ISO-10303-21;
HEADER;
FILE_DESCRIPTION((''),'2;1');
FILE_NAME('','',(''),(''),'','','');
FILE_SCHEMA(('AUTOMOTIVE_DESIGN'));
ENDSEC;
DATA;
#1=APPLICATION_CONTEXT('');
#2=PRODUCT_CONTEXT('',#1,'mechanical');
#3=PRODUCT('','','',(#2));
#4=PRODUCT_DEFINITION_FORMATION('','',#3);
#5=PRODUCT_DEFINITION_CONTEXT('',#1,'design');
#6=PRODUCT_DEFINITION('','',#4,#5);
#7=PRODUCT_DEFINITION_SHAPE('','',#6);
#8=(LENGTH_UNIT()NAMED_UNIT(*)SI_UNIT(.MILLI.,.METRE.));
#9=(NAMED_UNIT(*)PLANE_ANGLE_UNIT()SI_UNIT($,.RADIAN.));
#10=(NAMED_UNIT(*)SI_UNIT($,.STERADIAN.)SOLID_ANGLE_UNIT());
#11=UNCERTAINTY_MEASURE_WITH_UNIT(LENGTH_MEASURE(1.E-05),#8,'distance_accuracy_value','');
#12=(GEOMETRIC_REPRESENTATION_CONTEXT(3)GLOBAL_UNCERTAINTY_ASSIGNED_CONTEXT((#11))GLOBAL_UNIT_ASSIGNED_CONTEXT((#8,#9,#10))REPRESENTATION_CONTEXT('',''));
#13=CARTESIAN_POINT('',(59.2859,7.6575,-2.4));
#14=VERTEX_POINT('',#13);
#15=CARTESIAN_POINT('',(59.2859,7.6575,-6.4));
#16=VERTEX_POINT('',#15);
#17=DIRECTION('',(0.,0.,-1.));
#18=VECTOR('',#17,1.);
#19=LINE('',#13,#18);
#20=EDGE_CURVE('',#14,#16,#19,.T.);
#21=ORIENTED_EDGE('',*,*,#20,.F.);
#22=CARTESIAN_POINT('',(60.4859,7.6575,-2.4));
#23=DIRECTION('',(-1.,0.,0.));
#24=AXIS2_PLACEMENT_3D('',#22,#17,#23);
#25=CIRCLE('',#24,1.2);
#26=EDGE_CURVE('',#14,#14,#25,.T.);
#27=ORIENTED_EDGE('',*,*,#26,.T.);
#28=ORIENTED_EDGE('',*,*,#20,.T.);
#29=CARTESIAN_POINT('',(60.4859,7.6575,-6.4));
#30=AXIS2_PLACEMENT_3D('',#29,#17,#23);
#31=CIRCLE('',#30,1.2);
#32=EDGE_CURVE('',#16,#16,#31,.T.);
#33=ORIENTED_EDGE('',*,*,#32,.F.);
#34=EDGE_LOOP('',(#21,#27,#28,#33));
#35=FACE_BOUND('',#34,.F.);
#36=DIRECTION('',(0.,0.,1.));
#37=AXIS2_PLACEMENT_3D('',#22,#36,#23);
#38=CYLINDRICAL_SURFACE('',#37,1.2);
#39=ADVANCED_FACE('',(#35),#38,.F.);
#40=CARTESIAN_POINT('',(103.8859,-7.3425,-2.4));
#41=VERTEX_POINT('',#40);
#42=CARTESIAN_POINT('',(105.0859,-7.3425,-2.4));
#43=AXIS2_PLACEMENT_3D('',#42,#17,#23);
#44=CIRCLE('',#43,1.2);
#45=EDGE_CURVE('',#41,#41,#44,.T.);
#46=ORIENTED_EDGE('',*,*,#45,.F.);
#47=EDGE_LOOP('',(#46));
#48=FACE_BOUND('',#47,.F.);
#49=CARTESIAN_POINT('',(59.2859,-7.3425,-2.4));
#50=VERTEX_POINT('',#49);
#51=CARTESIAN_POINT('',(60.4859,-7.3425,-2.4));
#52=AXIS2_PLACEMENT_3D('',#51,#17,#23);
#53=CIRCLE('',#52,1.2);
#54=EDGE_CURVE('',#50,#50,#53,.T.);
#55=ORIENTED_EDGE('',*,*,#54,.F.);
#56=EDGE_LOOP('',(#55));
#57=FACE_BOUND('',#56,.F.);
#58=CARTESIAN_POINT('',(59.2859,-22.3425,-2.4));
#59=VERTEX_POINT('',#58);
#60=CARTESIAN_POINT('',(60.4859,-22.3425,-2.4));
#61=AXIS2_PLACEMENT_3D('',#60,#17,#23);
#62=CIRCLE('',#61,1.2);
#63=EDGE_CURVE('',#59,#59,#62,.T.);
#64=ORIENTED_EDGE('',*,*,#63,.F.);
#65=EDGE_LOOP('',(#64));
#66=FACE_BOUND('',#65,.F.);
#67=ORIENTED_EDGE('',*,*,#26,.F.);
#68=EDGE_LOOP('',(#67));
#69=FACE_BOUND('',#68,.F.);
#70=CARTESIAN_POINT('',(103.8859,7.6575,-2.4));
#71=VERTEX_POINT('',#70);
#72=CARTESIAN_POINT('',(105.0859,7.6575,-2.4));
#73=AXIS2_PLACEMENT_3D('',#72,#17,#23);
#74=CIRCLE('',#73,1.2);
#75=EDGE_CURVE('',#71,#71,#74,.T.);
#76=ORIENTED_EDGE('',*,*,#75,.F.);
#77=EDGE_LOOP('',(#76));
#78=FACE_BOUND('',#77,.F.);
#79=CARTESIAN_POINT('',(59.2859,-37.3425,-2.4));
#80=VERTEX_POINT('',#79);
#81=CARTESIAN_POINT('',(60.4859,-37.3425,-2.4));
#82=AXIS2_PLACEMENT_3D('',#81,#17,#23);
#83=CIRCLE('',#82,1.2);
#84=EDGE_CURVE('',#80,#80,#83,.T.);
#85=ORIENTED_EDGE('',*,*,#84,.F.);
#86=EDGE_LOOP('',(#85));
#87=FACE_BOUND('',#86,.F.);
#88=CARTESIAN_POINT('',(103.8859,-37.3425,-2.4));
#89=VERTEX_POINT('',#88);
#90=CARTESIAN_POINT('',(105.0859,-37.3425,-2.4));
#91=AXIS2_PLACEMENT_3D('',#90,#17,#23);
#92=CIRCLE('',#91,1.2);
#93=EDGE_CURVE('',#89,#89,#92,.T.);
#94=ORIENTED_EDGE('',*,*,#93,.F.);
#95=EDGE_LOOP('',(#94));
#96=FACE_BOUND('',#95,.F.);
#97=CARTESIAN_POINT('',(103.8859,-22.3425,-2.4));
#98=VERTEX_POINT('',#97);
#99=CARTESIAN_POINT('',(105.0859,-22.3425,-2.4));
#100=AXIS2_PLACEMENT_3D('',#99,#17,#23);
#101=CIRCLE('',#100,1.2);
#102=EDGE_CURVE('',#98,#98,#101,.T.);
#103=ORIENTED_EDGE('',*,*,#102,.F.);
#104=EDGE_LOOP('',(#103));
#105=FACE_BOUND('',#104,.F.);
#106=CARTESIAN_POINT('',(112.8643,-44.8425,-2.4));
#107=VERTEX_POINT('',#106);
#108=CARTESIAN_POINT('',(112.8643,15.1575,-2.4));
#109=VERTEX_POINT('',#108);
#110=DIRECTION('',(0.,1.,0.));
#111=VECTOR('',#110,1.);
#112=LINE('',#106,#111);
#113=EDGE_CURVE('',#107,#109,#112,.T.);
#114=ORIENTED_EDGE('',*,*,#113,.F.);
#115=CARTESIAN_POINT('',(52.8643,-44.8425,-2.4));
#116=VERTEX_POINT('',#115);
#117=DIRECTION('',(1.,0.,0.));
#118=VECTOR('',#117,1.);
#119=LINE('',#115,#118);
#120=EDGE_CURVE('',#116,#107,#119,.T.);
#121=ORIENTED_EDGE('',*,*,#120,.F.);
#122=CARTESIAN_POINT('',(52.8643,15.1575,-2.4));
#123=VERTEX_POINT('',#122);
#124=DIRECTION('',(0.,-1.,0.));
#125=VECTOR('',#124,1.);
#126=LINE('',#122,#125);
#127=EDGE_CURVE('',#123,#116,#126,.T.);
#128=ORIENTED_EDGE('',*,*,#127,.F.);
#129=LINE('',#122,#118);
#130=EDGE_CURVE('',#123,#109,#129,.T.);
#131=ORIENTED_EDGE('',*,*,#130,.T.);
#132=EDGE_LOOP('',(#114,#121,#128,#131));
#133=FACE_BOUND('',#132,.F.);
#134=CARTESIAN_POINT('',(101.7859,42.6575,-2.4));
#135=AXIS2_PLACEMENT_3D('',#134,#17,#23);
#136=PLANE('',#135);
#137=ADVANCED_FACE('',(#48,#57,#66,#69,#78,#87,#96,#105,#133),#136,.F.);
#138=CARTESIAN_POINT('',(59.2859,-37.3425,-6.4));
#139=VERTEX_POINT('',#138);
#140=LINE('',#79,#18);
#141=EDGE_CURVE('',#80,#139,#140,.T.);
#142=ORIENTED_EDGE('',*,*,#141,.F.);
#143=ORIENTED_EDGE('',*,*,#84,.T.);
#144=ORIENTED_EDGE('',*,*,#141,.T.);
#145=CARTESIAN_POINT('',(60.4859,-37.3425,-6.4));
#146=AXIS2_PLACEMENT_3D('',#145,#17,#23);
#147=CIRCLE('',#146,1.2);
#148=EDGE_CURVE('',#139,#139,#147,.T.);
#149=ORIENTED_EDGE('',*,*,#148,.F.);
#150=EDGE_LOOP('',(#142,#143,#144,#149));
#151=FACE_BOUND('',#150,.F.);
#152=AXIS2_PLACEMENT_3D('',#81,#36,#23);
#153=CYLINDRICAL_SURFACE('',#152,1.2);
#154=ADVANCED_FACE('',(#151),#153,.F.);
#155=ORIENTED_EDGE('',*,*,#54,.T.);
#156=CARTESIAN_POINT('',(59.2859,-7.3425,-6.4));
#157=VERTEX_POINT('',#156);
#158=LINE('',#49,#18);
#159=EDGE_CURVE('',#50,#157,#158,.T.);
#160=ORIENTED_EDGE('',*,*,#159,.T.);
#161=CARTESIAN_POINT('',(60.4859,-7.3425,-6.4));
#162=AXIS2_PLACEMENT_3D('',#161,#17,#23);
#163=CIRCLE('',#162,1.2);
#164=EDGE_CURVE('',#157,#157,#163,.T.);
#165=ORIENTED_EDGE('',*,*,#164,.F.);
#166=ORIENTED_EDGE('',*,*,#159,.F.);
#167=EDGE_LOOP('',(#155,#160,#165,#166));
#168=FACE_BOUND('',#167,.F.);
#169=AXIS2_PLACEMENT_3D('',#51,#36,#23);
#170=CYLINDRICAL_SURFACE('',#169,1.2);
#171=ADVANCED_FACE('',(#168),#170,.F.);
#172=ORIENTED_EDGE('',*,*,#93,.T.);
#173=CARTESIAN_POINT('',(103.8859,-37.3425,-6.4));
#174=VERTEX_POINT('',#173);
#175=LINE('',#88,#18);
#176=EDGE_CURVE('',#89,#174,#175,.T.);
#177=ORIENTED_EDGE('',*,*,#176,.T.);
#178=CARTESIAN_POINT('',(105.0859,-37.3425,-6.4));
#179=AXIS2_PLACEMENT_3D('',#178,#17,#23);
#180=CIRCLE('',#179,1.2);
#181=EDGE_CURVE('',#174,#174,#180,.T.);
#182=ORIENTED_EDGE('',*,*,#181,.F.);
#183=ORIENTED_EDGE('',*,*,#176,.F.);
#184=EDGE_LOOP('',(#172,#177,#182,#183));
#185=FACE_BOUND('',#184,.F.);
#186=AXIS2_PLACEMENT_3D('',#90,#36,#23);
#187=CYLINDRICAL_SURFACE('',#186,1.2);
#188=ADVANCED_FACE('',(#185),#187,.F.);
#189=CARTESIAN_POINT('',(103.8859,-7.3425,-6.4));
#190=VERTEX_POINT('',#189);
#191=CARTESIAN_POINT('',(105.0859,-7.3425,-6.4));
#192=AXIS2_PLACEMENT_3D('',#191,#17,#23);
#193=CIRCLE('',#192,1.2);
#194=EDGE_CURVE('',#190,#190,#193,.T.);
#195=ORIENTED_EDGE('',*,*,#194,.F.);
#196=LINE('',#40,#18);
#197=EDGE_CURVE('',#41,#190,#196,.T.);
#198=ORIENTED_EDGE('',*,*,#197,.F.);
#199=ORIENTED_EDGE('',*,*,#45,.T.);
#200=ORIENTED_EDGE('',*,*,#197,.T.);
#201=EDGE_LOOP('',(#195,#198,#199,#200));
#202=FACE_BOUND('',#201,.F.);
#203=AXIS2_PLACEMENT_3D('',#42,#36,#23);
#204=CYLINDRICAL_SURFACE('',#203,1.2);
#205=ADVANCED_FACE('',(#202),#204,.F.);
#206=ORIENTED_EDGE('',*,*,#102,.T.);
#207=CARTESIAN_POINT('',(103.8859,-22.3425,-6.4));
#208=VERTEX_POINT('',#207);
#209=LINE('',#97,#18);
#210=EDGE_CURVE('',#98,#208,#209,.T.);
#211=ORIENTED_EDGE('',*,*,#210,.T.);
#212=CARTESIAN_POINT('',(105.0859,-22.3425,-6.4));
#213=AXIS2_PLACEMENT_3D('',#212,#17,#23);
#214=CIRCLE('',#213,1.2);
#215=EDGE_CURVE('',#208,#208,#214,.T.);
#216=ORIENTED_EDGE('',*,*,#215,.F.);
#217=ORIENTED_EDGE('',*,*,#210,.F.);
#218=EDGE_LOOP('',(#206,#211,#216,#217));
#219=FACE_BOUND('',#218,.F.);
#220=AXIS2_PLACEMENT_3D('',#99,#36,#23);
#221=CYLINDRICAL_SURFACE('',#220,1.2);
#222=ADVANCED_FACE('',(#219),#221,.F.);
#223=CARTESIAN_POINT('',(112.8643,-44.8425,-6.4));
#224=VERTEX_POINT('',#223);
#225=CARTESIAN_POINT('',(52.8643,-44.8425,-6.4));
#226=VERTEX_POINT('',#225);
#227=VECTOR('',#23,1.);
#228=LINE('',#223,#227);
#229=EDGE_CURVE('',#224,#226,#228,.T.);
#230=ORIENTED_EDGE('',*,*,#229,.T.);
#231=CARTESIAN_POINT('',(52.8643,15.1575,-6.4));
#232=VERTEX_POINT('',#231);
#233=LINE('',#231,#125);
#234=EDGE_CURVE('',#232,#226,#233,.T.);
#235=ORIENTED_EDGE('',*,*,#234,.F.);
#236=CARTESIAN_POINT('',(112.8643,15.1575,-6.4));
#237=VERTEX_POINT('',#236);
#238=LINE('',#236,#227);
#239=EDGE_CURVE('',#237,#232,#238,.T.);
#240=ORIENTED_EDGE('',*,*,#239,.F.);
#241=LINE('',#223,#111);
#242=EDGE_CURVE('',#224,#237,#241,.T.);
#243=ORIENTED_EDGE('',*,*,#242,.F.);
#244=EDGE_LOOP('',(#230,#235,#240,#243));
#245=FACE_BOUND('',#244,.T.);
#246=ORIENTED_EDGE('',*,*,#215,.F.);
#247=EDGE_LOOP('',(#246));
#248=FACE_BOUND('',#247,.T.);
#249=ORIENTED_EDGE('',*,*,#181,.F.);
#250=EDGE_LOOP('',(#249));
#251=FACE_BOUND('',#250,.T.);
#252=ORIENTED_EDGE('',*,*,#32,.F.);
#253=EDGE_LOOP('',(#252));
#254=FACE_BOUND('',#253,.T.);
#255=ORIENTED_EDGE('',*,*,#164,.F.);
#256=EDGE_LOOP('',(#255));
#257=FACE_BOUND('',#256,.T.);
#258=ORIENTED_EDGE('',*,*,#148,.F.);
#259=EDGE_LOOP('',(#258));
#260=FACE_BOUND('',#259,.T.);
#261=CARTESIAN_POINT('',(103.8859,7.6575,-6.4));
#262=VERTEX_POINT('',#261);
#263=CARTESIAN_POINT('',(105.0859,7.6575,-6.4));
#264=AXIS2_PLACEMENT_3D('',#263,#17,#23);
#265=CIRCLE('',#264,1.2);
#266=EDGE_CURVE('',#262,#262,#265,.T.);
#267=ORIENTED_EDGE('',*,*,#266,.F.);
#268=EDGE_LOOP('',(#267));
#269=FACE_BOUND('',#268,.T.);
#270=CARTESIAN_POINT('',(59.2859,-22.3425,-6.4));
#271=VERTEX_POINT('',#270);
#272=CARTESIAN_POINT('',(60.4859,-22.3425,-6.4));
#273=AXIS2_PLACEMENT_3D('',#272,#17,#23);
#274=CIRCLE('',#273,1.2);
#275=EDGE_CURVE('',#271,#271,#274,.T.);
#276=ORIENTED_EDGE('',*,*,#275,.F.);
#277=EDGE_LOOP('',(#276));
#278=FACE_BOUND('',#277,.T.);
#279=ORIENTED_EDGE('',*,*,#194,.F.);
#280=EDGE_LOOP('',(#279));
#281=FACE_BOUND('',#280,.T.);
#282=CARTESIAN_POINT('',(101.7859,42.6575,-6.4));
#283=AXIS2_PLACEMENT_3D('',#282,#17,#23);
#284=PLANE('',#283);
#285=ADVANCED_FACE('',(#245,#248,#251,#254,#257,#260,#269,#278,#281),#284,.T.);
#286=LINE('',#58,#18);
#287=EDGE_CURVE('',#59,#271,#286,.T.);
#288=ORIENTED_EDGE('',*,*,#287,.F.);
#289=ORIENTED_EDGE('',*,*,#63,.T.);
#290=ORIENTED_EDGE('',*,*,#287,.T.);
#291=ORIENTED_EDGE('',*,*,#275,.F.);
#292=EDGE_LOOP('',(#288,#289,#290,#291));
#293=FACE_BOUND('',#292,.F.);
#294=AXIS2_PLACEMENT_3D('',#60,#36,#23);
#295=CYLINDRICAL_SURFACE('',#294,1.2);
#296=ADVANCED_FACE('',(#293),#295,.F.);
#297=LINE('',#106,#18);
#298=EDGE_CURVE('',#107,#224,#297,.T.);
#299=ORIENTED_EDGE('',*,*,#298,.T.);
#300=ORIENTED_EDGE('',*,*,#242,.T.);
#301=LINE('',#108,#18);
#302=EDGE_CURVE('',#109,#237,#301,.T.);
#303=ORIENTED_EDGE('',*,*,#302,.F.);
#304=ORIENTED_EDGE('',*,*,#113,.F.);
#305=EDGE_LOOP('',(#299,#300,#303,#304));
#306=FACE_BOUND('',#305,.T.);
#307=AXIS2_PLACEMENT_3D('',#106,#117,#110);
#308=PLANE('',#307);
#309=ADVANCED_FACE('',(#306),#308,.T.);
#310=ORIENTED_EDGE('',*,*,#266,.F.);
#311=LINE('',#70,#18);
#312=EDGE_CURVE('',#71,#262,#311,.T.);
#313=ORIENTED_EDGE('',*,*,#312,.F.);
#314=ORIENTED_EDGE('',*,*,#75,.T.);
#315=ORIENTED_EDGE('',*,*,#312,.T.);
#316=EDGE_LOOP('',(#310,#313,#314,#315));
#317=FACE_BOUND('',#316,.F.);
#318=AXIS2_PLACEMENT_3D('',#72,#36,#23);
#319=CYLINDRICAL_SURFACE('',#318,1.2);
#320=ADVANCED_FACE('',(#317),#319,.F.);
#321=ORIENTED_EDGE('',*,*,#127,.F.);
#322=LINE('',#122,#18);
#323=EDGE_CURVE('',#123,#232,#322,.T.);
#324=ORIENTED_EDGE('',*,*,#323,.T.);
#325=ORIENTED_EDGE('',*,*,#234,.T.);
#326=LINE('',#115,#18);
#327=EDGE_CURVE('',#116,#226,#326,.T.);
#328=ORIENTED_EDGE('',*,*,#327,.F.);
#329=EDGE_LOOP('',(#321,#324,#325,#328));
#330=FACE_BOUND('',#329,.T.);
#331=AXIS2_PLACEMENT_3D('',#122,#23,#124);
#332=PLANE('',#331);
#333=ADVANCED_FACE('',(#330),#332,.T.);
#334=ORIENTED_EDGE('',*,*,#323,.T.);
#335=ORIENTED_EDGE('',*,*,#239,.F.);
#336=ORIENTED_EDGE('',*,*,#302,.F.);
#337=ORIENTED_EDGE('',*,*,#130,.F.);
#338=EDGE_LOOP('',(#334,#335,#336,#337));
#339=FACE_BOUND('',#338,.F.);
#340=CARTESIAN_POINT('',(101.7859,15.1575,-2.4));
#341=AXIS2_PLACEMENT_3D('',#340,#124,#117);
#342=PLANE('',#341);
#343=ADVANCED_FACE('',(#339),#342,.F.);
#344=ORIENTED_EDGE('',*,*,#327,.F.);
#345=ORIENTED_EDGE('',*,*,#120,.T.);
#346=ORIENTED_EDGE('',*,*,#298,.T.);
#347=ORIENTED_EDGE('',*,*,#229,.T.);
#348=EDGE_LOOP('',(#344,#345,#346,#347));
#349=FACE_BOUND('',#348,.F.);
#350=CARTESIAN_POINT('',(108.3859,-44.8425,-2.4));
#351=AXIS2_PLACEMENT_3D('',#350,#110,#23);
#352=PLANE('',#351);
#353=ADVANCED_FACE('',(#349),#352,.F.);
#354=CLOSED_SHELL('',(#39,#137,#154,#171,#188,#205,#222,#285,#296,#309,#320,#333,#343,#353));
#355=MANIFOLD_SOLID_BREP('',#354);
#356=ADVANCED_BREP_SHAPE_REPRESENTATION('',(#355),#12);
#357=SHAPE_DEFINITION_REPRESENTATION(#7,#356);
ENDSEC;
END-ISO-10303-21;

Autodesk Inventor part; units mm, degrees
ref_plane "YZ Plane" through (0, 0, 0) normal (1, 0, 0) x (0, 1, 0)
ref_plane "XZ Plane" through (0, 0, 0) normal (0, 1, 0) x (-1, 0, 0)
ref_plane "XY Plane" through (0, 0, 0) normal (0, 0, 1) x (1, 0, 0)
ref_plane "РабПлоскость2" through (101.7859, 42.6575, -2.4) normal (0, 0, -1) x (-1, 0, 0)
sketch "Эскиз2" plane through (101.7859, 42.6575, -2.4) normal (0, 0, -1) x (-1, 0, 0)
  line L0 (-6.6, -87.5) -> (0, -87.5) projected
  line L1 (0, -27.5) -> (0, -87.5) projected
  line L2 (0, -27.5) -> (-6.6, -27.5) projected
  line L3 (-6.6, -27.5) -> (-6.6, -87.5) projected
  circle A0 centre (-3.3, -35) radius 2.3 projected
  circle A1 centre (-3.3, -50) radius 2.3 projected
  circle A2 centre (-3.3, -65) radius 2.3 projected
  circle A3 centre (-3.3, -80) radius 2.3 projected
  line L4 (38, -87.5) -> (44.6, -87.5) projected
  line L5 (44.6, -27.5) -> (44.6, -87.5) projected
  line L6 (44.6, -27.5) -> (38, -27.5) projected
  line L7 (38, -27.5) -> (38, -87.5) projected
  circle A4 centre (41.3, -35) radius 2.3 projected
  circle A5 centre (41.3, -50) radius 2.3 projected
  circle A6 centre (41.3, -65) radius 2.3 projected
  circle A7 centre (41.3, -80) radius 2.3 projected
  line L8 (-11.0784, -27.5) -> (48.9216, -27.5)
  line L9 (48.9216, -27.5) -> (48.9216, -87.5)
  line L10 (48.9216, -87.5) -> (-11.0784, -87.5)
  line L11 (-11.0784, -87.5) -> (-11.0784, -27.5)
  line L12 (18.9216, -50) -> (18.9216, -69.7785)
  circle A8 centre (-3.3, -35) radius 1.2 projected
  circle A9 centre (-3.3, -50) radius 1.2 projected
  circle A10 centre (-3.3, -65) radius 1.2 projected
  circle A11 centre (-3.3, -80) radius 1.2 projected
  circle A12 centre (41.3, -80) radius 1.2 projected
  circle A13 centre (41.3, -65) radius 1.2 projected
  circle A14 centre (41.3, -50) radius 1.2 projected
  circle A15 centre (41.3, -35) radius 2.1 projected
  circle A16 centre (41.3, -35) radius 1.2 projected
  point P0 (101.7859, -42.6575)
  point P1 (0, -87.5)
  point P2 (0, -27.5)
  point P3 (-6.6, -27.5)
  dimension "d3" = 60
  dimension "d4" = 60
  dimension "d5" = 30
extrude "Выдавливание2" add sketch "Эскиз2" along normal blind 4 contours L3 L2 L1 L0 | L10 L11 L8 L3 | L1 L8 L7 L10 | L7 L6 L5 L4 | L5 L8 L9 L10 | A0 | A1 | A2 | A3 | A4 | A5 | A6 | A7 | A15
properties part number "деталь которая двигает"
